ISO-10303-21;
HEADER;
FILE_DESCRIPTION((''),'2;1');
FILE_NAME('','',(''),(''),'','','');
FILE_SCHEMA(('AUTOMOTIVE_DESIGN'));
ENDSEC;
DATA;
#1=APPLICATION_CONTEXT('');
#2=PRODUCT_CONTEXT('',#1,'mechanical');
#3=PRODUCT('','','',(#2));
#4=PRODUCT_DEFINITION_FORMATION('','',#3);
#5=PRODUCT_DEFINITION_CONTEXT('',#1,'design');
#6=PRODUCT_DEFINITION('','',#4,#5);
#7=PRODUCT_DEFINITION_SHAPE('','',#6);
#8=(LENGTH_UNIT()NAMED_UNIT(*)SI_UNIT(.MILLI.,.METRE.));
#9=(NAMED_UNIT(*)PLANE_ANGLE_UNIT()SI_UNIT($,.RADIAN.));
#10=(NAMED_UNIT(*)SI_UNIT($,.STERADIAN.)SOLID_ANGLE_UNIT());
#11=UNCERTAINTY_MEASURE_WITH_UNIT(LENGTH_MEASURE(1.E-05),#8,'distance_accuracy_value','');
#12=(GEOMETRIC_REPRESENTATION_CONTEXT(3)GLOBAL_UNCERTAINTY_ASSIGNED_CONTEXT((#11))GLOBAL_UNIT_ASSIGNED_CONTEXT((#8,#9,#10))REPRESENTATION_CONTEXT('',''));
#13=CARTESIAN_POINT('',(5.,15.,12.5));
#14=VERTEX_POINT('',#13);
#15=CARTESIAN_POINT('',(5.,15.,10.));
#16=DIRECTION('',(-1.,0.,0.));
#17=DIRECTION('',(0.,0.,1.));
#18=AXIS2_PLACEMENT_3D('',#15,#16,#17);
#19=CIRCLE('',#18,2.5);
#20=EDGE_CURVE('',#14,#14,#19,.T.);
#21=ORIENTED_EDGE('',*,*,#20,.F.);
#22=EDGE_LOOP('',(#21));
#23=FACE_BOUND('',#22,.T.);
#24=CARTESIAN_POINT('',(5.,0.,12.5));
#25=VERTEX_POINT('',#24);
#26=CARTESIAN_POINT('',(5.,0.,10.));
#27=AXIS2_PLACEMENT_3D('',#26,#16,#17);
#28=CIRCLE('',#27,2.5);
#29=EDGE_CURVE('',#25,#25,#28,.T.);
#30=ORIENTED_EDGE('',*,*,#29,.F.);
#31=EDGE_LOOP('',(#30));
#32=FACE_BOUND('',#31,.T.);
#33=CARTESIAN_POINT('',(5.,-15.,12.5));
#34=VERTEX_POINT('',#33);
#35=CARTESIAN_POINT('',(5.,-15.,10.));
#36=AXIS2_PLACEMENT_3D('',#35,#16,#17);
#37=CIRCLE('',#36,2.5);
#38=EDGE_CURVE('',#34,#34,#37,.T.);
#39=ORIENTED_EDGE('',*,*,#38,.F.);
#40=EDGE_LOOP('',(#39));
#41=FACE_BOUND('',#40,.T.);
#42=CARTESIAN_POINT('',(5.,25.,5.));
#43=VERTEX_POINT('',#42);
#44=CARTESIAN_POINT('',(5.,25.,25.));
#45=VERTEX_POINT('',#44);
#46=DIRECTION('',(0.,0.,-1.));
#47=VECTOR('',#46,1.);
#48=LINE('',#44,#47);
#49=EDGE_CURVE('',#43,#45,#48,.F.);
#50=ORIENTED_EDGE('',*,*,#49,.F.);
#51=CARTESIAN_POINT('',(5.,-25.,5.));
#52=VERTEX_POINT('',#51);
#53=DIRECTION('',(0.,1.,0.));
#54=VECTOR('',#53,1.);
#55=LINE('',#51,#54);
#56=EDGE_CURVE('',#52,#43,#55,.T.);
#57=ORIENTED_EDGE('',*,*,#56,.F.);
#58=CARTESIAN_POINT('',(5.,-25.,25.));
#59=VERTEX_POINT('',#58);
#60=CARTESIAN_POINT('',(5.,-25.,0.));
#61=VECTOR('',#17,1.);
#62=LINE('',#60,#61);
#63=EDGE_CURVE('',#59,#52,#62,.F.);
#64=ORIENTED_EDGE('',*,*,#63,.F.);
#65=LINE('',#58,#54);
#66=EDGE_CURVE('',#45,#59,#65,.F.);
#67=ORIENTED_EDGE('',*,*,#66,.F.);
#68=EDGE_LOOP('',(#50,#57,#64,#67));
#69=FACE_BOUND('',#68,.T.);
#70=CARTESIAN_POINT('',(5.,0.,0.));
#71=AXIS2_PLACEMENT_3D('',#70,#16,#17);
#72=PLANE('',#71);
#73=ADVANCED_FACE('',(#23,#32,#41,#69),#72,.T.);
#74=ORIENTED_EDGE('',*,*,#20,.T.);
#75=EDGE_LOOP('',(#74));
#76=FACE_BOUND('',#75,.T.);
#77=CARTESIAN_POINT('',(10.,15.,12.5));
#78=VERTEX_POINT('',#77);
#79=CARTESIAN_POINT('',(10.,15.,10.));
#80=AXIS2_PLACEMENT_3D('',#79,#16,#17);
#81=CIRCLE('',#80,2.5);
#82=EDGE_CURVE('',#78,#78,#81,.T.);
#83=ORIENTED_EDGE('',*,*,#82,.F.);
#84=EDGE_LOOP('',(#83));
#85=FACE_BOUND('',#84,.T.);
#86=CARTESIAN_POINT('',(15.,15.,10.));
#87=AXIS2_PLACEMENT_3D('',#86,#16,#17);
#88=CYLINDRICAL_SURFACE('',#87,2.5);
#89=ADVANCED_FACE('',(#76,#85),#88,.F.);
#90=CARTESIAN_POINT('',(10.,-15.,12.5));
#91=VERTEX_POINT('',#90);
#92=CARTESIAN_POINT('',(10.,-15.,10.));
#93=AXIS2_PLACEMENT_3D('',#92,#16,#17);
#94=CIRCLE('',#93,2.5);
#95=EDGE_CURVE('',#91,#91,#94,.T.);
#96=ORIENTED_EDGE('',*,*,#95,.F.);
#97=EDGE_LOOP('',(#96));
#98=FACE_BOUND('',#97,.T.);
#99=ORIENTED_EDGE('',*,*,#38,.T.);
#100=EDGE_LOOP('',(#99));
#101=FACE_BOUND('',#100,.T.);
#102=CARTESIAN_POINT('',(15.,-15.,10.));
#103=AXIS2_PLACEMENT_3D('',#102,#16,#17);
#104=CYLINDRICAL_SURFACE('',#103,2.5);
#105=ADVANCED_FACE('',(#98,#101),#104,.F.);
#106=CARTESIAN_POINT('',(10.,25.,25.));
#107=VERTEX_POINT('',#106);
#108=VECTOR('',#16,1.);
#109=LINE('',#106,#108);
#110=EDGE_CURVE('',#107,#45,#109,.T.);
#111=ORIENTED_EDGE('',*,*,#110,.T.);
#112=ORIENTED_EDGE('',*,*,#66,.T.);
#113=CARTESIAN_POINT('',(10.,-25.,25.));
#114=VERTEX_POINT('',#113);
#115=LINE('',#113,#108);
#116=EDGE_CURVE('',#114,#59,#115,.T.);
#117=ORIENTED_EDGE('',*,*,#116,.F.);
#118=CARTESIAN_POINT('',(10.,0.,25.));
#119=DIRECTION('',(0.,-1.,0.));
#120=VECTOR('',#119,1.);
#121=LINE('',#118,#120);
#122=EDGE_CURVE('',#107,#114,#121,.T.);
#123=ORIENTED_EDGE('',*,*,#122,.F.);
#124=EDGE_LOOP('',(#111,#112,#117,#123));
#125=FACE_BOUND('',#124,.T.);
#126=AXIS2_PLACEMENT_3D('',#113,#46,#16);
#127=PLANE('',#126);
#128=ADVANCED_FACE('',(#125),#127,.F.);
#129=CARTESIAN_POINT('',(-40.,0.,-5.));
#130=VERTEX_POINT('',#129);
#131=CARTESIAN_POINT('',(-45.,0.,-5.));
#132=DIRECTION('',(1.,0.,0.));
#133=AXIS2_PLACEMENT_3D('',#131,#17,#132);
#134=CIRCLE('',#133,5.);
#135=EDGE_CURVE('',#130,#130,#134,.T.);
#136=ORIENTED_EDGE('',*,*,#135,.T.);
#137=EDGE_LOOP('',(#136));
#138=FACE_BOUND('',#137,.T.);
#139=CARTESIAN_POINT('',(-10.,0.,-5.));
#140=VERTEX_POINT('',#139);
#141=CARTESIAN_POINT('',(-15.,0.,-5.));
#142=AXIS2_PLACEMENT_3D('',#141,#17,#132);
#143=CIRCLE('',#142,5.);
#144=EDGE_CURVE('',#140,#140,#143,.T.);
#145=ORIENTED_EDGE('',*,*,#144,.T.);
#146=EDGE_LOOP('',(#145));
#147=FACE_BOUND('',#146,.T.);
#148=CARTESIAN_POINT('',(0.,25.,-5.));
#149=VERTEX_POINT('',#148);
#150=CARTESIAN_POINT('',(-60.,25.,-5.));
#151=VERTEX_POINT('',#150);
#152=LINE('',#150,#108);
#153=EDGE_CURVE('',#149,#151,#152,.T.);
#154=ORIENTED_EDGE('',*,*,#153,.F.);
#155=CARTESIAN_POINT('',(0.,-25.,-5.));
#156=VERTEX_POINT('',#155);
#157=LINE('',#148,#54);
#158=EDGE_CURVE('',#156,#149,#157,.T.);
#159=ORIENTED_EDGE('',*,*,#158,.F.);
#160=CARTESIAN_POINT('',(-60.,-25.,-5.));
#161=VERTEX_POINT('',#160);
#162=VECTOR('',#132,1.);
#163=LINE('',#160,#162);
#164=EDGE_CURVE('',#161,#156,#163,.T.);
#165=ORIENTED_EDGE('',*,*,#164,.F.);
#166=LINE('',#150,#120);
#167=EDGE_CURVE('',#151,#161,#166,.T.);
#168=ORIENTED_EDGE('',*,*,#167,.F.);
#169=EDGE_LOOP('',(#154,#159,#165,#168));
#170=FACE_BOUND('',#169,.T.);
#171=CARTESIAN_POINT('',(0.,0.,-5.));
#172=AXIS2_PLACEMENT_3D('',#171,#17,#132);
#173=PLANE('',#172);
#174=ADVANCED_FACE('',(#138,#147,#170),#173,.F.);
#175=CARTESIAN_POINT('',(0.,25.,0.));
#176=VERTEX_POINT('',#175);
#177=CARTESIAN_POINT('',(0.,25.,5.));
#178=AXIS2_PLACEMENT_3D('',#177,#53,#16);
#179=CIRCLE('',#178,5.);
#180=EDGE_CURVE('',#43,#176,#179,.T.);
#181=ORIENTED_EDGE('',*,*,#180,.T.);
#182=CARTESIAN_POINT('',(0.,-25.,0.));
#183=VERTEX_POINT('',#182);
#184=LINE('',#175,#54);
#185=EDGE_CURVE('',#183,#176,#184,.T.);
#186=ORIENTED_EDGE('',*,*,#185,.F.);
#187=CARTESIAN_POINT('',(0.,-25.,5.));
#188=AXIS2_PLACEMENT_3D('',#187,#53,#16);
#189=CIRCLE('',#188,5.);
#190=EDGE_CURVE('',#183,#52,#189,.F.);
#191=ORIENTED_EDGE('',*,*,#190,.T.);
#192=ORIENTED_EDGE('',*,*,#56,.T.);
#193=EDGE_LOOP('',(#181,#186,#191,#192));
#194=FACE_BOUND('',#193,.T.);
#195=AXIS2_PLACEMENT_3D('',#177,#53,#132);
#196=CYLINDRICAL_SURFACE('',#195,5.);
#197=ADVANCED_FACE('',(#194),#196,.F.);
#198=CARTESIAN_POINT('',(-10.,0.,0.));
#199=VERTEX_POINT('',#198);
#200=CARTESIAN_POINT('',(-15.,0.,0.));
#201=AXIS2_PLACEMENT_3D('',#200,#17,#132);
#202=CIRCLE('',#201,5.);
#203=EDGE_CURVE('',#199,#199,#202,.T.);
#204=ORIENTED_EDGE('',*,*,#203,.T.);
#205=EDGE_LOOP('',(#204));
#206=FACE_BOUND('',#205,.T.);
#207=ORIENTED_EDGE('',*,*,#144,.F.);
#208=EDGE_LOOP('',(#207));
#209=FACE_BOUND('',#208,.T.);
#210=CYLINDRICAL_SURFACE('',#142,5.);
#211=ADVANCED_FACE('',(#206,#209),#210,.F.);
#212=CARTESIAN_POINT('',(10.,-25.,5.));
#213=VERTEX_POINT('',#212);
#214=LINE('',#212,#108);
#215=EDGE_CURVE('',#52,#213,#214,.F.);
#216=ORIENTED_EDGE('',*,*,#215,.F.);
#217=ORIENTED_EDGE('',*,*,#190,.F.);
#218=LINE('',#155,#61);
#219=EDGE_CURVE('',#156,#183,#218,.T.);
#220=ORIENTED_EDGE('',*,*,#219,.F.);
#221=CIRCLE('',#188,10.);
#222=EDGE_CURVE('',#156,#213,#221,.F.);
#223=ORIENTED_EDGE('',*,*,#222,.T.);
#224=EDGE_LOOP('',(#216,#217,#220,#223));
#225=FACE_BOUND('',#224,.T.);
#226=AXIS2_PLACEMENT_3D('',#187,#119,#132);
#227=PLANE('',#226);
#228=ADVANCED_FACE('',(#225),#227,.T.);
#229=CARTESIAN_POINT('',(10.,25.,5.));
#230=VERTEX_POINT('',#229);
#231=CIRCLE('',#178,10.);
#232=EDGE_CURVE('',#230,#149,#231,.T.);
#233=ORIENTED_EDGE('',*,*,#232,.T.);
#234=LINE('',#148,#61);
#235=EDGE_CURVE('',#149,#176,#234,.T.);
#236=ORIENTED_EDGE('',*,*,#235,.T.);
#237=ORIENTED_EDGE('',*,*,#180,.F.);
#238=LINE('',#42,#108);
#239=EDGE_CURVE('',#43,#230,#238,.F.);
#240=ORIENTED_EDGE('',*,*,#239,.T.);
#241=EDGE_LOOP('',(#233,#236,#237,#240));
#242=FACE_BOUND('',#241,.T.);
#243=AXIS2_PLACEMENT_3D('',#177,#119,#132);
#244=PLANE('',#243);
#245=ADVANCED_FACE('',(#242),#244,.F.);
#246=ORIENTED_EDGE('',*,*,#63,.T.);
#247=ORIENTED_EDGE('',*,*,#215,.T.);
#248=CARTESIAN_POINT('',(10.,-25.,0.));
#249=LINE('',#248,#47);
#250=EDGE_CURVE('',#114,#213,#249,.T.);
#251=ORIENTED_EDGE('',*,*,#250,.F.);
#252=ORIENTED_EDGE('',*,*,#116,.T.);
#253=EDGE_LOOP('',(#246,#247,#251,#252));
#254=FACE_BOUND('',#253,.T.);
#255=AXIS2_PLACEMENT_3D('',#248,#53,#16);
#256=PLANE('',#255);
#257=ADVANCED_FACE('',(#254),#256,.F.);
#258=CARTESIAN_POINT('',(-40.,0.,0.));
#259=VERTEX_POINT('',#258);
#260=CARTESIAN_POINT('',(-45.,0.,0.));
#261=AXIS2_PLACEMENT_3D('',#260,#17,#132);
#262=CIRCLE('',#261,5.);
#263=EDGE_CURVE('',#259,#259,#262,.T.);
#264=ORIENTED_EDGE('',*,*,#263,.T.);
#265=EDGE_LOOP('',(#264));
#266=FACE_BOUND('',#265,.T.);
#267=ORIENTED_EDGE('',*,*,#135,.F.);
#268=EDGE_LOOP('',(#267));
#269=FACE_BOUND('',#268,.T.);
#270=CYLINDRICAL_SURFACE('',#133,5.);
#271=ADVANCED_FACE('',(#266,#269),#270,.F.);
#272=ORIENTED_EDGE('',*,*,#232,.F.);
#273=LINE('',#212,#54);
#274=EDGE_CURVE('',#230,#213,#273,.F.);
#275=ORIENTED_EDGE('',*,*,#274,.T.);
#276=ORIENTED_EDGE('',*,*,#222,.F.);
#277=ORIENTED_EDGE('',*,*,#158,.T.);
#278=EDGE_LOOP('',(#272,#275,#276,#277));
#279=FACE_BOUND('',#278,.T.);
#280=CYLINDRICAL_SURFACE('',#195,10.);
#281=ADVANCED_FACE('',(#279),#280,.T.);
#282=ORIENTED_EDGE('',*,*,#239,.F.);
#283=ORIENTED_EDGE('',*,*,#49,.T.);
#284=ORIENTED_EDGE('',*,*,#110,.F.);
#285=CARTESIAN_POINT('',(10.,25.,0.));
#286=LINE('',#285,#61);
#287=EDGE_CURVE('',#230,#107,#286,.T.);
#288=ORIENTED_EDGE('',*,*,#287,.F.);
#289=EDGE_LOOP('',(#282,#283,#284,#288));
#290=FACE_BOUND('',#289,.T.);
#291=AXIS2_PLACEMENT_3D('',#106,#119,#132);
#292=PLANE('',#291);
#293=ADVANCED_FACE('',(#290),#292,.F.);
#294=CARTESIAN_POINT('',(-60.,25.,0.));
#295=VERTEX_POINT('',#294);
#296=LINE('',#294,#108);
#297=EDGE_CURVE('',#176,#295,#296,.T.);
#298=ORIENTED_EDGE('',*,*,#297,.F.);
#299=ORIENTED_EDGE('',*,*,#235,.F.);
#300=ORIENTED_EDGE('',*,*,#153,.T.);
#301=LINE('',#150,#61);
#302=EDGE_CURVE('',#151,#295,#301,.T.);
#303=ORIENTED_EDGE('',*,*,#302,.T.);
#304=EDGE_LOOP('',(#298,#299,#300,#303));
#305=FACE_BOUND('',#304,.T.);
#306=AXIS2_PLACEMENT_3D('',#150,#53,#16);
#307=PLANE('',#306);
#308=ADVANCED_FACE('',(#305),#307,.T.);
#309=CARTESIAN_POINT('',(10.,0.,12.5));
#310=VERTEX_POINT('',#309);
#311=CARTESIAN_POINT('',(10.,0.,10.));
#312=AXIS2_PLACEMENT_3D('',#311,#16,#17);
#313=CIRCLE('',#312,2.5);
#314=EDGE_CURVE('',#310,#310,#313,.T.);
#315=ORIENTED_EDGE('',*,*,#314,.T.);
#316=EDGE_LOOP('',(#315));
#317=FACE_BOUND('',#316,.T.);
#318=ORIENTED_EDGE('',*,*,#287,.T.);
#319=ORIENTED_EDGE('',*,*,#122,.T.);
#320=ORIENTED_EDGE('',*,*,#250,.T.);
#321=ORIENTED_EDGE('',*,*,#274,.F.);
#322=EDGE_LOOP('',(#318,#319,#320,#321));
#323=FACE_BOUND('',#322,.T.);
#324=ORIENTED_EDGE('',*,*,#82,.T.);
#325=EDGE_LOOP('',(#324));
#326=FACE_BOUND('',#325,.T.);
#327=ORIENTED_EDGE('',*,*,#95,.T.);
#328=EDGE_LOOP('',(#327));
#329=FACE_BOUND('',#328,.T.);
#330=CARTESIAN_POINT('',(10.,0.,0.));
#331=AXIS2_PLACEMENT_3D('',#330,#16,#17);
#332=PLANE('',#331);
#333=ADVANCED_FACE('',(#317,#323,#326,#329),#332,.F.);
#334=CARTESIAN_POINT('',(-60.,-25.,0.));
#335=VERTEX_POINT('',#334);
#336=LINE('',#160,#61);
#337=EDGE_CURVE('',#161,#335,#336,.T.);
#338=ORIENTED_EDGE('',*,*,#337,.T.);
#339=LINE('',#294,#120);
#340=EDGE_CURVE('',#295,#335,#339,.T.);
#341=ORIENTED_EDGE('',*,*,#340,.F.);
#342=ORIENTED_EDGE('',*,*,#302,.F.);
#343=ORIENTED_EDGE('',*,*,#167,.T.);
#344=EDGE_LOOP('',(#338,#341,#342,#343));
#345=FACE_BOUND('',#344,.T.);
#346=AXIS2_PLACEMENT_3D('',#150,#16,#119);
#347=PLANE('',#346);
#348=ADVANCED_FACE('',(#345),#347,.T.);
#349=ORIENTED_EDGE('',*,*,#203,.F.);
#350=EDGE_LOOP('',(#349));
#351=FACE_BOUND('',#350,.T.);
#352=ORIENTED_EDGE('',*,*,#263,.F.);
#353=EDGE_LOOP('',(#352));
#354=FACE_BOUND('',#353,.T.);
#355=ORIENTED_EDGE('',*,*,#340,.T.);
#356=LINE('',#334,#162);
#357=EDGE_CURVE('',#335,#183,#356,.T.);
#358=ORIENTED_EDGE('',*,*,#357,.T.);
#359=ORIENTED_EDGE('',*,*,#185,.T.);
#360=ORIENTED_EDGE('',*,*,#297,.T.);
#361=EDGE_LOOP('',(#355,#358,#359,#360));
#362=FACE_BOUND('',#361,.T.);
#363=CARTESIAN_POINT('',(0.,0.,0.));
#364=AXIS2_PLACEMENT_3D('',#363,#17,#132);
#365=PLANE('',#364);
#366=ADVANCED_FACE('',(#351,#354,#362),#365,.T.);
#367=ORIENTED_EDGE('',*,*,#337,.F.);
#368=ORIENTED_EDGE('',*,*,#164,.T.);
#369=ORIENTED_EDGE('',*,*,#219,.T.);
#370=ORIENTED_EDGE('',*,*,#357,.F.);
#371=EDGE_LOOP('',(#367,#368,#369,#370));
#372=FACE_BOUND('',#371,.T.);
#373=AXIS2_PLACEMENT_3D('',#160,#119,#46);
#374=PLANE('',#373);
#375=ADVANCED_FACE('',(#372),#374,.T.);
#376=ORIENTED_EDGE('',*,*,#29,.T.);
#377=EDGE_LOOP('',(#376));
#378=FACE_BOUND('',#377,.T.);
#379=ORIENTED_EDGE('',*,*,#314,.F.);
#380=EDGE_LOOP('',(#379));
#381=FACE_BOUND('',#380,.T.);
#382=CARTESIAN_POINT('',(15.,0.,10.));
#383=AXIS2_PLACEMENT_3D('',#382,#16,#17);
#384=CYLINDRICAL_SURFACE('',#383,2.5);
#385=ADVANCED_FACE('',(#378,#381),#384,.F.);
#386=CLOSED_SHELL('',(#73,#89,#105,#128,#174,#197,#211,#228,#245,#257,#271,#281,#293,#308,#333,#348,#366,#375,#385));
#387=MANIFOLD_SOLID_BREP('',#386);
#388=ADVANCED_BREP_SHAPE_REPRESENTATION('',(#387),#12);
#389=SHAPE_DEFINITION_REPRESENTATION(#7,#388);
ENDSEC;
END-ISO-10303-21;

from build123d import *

# Parameters (mm, degrees)
SKETCH1_W           = 60
SKETCH1_H           = 50
BASE_FLANGE1_DEPTH  = 5
SKETCH6_R           = 5
CUT_EXTRUDE1_DEPTH  = 66.192024052
EDGE_FLANGE1_DEPTH  = 50
HOLE1_START         = 5
HOLE1_OUTLINE_R     = 2.5
HOLE1_DEPTH         = 5
LPATTERN1_COUNT     = 2
LPATTERN1_PITCH     = 15
LPATTERN1_COL_COUNT = 2
LPATTERN1_COL_PITCH = 15


# Read off the part's stored shape, not the designer's step: Hole1
# Sheet-metal steps are written as plain solids
with BuildPart() as part:
    # Sketch1 → Base-Flange1 (new body)
    with BuildSketch(Plane.XY):
        with Locations((-30, 0)):
            Rectangle(SKETCH1_W, SKETCH1_H)
    extrude(amount=-BASE_FLANGE1_DEPTH)

    # Sketch6 → Cut-Extrude1 (cut, through all)
    with BuildSketch(Plane.XY):
        with Locations((-45, 0)):
            Circle(SKETCH6_R)
        with Locations((-15, 0)):
            Circle(SKETCH6_R)
    extrude(amount=-CUT_EXTRUDE1_DEPTH, mode=Mode.SUBTRACT)

    # Edge-Flange1 section (across the edge) → Edge-Flange1 (add)
    with BuildSketch(Plane(origin=(5, -25, 0), x_dir=(-1, 0, 0), z_dir=(0, 1, 0))):
        with BuildLine():
            Line((-5, 5), (-5, 25))
            Line((-5, 25), (0, 25))
            Line((0, 25), (0, 5))
            ThreePointArc((0, 5), (1.464466094, 1.464466094), (5, 0))
            Line((5, 0), (5, -5))
            ThreePointArc((5, -5), (-2.071067812, -2.071067812), (-5, 5))
        make_face()
    extrude(amount=EDGE_FLANGE1_DEPTH)

    # Hole1 outline → Hole1 (cut)
    with BuildSketch(Plane.YZ.offset(HOLE1_START)):
        with Locations((0, 10)):
            Circle(HOLE1_OUTLINE_R)
    hole1 = extrude(amount=HOLE1_DEPTH, mode=Mode.SUBTRACT)

    # LPattern1: Hole1 ×2
    with Locations(*[(0, i * LPATTERN1_PITCH, 0) for i in range(1, LPATTERN1_COUNT)]):
        add(hole1, mode=Mode.SUBTRACT)

    # LPattern1 col: Hole1 ×2
    with Locations(*[(0, -i * LPATTERN1_COL_PITCH, 0) for i in range(1, LPATTERN1_COL_COUNT)]):
        add(hole1, mode=Mode.SUBTRACT)


solid = part.part
